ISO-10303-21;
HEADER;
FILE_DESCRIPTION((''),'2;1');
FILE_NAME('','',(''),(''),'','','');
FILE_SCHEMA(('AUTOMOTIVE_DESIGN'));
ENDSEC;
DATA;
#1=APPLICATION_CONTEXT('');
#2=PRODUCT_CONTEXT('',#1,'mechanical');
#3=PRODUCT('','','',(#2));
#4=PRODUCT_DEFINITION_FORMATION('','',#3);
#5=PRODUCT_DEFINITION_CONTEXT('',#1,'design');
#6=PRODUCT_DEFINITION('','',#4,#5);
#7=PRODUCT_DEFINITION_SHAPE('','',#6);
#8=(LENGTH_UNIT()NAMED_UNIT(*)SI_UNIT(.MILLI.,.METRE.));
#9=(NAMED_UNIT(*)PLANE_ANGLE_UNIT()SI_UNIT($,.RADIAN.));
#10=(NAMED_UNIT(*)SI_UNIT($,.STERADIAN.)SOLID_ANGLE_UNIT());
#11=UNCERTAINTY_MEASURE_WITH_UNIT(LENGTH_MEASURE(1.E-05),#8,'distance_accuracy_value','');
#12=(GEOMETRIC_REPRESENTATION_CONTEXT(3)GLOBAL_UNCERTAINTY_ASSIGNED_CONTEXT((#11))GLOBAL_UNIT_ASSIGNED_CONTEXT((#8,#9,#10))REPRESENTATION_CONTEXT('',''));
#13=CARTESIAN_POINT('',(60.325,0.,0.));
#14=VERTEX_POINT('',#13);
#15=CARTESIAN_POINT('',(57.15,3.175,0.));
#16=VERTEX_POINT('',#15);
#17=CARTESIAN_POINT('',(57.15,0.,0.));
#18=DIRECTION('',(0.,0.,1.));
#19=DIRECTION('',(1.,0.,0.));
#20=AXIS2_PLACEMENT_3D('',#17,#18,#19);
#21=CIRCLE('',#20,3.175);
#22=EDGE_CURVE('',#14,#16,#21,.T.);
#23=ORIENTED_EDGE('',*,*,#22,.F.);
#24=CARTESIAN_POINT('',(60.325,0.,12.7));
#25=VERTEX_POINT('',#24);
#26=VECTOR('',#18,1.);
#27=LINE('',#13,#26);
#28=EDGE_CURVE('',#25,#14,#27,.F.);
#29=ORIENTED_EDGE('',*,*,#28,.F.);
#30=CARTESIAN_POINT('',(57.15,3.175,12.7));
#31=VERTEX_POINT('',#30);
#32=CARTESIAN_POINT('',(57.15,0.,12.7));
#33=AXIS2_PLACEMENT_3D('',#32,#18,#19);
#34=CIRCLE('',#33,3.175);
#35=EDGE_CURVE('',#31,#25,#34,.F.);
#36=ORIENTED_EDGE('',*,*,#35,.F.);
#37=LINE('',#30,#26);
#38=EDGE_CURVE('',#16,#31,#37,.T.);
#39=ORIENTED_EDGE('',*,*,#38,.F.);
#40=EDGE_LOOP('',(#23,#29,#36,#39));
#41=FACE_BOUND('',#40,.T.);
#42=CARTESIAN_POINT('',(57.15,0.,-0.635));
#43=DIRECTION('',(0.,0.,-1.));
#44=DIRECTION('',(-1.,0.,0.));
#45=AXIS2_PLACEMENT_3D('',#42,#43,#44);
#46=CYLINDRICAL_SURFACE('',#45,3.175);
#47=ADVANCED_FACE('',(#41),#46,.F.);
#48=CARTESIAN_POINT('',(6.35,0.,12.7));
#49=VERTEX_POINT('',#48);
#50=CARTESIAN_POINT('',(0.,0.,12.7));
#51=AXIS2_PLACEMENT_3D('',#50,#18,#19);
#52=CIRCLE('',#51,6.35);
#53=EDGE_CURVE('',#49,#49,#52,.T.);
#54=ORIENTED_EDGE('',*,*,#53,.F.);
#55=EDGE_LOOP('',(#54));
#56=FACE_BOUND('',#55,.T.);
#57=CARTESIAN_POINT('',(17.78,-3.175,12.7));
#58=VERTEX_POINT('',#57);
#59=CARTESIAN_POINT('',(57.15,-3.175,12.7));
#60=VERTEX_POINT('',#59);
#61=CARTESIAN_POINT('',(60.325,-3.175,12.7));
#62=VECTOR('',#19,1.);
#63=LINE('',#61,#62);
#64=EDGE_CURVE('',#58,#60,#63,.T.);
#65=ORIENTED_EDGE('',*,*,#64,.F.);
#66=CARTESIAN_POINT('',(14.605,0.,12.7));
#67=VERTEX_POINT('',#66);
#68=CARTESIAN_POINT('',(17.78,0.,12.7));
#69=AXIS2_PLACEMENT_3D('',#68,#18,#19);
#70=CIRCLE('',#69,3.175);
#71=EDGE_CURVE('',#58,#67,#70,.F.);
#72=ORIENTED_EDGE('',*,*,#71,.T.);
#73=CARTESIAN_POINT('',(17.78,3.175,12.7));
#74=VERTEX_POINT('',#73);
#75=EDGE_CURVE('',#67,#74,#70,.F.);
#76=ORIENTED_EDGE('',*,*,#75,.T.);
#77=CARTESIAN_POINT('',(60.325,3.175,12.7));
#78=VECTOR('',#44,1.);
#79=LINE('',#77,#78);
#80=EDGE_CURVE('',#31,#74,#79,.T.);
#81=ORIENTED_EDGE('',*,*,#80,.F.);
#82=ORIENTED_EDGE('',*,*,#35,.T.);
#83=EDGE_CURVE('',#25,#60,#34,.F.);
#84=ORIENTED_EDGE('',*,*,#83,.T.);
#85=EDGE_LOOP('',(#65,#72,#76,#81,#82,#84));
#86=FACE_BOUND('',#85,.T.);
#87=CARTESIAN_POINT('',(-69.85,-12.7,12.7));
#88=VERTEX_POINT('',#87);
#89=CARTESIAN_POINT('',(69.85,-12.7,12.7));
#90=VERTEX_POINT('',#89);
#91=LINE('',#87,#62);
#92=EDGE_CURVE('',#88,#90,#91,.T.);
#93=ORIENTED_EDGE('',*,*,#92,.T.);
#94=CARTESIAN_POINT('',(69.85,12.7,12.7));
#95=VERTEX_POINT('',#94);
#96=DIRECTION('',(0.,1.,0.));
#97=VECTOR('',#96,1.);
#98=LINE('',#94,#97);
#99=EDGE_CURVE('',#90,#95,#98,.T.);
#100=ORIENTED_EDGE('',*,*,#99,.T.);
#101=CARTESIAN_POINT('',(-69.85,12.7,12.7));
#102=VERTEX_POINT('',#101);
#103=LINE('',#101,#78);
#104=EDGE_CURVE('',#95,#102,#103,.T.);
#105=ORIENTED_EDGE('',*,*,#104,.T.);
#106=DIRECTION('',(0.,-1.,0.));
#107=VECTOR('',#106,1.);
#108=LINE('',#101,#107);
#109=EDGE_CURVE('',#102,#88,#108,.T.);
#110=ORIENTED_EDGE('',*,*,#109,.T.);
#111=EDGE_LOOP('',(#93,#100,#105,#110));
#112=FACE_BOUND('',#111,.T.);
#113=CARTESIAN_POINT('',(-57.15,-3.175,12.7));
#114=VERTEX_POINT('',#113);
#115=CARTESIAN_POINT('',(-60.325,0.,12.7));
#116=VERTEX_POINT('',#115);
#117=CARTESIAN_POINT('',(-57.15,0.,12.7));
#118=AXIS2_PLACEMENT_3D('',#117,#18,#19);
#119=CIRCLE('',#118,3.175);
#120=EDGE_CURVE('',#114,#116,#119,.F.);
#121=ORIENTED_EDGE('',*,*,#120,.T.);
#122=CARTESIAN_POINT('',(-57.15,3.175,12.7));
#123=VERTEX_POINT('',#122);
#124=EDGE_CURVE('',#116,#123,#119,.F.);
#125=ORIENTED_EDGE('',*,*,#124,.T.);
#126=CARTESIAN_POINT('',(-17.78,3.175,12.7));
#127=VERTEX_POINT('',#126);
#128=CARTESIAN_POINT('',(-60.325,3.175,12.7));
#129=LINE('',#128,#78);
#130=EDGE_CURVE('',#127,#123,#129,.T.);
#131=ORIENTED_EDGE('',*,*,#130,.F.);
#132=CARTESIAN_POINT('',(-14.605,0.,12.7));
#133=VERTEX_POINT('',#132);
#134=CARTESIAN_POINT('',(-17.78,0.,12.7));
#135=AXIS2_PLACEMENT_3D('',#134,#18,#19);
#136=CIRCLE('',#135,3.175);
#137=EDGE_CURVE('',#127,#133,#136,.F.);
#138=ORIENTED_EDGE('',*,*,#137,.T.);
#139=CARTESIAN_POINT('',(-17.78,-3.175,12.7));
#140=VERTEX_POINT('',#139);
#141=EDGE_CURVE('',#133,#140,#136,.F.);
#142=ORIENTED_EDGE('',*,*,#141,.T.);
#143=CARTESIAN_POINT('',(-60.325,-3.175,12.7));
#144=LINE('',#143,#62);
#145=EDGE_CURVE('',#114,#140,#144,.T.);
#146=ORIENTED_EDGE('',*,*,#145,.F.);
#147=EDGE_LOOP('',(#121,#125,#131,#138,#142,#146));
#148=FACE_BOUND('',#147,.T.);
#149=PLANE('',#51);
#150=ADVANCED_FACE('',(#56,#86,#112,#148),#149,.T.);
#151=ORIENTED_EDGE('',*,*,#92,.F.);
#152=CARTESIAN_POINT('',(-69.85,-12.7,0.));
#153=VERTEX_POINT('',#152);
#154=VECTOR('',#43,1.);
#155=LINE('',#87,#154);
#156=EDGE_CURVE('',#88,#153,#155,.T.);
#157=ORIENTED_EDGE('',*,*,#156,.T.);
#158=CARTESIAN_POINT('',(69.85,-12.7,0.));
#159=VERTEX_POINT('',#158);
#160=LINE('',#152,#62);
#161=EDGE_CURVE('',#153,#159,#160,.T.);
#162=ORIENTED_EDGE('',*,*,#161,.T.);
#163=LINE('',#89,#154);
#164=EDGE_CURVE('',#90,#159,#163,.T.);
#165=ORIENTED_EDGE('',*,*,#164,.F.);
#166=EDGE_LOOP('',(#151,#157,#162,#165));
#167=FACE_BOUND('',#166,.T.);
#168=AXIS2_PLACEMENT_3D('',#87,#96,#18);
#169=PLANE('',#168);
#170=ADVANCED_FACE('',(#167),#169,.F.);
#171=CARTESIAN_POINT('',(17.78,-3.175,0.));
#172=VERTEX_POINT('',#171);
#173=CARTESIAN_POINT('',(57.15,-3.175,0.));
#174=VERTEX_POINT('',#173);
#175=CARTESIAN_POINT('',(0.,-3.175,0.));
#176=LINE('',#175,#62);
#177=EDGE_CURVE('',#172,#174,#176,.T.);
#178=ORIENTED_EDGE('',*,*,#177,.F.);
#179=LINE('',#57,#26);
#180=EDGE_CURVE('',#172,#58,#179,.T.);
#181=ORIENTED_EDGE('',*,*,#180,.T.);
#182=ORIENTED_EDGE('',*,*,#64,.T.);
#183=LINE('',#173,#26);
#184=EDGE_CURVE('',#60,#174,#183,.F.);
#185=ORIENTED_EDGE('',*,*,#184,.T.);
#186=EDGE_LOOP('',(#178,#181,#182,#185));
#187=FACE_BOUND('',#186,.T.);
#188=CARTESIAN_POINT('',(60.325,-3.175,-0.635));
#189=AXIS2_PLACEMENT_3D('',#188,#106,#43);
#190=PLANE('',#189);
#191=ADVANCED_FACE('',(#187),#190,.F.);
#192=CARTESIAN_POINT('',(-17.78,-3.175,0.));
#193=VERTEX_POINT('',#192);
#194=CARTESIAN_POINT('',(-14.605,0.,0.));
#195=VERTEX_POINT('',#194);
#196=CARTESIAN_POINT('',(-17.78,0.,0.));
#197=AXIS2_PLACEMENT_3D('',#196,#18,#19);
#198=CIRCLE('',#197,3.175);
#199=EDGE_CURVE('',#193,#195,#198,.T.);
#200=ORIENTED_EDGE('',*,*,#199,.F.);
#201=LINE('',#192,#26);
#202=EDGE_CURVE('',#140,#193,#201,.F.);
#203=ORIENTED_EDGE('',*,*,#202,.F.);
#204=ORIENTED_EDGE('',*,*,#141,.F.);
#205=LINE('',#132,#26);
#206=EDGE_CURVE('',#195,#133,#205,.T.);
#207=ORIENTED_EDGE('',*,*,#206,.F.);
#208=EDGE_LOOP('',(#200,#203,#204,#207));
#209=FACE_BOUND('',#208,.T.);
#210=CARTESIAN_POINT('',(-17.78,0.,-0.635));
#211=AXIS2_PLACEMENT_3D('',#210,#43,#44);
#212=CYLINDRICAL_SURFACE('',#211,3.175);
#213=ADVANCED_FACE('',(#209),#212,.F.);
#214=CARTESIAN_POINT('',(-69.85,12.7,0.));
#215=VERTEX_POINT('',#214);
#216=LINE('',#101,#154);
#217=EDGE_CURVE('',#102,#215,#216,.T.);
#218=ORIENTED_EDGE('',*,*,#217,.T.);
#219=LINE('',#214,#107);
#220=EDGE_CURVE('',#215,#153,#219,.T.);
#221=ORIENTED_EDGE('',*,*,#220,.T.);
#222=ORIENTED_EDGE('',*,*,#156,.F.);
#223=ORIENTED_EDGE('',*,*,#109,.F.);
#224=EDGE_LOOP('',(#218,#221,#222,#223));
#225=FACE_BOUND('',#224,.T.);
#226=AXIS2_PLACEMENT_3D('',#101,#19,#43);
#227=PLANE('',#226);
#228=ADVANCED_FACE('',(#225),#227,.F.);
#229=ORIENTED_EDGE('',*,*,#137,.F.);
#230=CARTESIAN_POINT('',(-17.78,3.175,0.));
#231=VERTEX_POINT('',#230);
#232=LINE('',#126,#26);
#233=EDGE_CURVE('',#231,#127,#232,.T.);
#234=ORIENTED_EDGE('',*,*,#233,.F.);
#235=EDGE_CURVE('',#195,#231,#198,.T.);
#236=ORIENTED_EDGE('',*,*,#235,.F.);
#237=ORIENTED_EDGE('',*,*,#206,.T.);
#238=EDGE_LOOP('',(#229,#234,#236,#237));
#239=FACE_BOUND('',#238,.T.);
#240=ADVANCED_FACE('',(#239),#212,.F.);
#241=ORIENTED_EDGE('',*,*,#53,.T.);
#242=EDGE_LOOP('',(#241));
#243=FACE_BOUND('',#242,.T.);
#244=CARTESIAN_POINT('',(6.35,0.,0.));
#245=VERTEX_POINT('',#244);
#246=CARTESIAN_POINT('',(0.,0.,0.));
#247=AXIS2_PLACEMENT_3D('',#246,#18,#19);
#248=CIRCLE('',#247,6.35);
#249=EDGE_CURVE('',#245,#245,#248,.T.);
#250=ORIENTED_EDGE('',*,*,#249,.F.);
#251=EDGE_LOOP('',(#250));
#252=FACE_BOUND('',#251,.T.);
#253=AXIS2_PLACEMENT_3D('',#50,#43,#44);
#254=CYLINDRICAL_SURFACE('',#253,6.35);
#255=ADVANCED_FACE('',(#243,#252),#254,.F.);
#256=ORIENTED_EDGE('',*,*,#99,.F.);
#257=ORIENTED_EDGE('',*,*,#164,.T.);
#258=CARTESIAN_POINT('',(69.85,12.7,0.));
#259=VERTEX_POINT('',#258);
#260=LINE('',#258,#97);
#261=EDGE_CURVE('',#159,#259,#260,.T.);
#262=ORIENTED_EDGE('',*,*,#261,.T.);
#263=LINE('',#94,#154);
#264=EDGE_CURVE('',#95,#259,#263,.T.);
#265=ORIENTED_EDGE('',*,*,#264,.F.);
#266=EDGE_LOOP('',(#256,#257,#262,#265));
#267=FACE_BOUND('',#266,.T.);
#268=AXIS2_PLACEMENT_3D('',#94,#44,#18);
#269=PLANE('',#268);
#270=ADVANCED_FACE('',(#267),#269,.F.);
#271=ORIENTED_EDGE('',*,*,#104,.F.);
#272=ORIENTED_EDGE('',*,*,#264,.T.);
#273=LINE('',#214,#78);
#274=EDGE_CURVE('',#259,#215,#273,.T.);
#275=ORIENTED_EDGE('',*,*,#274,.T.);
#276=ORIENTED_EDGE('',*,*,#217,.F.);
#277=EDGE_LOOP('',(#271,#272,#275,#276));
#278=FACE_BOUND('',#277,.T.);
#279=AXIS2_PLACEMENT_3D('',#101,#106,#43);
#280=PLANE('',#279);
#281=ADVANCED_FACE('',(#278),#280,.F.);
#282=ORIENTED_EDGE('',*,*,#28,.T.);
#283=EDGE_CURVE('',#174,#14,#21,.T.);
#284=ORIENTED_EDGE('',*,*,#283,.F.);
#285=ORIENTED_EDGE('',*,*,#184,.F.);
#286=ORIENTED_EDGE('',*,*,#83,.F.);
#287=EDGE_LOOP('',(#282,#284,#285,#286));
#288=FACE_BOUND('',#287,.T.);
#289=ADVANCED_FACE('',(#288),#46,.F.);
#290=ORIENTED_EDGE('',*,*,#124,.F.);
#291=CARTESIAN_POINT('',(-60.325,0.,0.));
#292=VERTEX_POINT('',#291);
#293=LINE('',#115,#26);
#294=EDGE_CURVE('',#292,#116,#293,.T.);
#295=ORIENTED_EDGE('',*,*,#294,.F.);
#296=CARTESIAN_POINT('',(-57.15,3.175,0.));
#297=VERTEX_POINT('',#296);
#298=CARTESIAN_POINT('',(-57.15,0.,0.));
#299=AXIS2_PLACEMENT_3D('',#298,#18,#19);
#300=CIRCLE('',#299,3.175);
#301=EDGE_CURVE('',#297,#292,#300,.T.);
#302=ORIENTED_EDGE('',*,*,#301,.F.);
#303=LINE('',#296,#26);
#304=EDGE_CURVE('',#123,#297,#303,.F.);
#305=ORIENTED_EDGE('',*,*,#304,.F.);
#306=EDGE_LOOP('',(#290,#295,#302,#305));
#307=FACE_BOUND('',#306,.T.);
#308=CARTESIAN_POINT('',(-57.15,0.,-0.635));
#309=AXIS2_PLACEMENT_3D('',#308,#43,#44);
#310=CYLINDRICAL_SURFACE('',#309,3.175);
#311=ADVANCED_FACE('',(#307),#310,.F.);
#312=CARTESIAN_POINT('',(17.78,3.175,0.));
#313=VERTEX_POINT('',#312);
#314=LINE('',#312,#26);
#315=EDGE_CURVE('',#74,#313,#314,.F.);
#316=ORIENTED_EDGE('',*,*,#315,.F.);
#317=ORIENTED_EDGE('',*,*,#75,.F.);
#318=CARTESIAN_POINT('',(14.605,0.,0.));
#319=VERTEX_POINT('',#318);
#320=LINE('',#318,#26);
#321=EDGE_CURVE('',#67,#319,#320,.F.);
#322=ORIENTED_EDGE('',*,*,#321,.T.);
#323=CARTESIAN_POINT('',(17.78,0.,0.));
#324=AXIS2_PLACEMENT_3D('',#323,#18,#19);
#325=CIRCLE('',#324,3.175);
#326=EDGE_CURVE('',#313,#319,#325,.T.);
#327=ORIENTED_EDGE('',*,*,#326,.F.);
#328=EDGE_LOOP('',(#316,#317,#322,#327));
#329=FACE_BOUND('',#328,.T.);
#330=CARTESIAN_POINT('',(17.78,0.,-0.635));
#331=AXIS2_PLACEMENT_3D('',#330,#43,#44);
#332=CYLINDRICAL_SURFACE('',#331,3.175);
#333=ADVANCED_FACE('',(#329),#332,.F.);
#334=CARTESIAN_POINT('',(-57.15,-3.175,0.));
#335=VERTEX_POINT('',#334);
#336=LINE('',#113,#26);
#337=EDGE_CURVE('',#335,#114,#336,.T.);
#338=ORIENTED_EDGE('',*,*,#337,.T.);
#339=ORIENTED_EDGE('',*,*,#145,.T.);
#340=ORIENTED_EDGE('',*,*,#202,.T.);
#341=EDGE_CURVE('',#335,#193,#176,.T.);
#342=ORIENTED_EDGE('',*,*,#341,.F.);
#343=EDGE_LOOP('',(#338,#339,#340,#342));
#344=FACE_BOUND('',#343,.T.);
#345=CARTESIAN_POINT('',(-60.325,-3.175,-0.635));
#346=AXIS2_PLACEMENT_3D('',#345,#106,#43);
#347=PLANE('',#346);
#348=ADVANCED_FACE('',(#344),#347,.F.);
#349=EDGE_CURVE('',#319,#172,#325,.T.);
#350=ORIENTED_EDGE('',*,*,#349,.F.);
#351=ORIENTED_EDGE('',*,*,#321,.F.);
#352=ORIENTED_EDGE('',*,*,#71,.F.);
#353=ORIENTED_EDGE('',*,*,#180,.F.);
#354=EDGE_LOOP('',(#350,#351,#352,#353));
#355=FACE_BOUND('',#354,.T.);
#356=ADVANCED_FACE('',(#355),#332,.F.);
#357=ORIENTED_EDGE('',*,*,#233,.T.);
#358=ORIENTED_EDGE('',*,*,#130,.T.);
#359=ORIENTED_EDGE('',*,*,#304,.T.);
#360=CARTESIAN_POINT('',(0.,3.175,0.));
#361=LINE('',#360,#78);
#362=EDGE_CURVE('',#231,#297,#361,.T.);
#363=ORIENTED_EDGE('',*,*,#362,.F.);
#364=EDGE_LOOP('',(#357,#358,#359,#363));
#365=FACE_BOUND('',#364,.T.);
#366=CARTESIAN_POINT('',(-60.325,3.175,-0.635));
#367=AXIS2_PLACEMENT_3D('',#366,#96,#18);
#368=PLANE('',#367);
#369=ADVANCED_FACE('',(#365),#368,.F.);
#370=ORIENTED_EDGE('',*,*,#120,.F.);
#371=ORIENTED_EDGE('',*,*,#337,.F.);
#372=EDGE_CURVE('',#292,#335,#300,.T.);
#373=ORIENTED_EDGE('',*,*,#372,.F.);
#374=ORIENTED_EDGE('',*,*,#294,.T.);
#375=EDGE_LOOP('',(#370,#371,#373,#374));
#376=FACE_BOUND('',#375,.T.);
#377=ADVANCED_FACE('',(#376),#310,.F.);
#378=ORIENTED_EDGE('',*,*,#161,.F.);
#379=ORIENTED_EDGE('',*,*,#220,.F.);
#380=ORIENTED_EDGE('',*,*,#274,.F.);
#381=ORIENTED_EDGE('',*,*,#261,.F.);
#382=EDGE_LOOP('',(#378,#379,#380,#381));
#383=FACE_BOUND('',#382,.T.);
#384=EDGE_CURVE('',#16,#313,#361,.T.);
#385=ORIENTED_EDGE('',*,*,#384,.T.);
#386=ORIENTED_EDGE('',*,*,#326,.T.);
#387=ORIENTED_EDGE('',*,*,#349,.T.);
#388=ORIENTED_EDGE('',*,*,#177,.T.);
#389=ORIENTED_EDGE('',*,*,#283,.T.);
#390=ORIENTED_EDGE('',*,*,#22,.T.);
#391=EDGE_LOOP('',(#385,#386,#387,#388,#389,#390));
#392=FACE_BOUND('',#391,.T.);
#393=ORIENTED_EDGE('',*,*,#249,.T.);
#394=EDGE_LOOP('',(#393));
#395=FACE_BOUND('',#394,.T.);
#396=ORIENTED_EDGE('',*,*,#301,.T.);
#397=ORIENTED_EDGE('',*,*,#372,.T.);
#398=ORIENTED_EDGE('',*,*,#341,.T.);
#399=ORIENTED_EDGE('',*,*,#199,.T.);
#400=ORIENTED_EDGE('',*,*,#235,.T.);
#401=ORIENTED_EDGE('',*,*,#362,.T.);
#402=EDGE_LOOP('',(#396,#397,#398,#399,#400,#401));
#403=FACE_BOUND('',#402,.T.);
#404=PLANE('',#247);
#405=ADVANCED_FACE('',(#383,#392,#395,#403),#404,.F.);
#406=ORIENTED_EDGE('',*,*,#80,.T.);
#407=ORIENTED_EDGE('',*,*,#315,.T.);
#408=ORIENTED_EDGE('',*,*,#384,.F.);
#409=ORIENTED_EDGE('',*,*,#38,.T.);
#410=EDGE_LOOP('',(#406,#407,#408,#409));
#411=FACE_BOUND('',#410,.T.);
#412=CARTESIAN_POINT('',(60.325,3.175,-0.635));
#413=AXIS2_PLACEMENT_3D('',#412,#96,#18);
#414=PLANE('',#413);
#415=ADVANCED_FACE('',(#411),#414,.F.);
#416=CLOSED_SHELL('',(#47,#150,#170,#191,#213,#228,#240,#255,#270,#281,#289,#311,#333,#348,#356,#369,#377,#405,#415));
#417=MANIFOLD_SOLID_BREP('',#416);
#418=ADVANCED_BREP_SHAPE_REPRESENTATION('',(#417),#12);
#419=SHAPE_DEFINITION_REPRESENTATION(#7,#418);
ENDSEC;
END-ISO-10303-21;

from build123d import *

# Parameters (mm, degrees)
SKETCH1_W           = 139.7
SKETCH1_H           = 25.4
SKETCH1_R           = 6.35
BOSS_EXTRUDE1_DEPTH = 12.7
SKETCH4_W           = 45.72
SKETCH4_H           = 6.35
CUT_EXTRUDE1_DEPTH  = 13.335
FILLET1_R           = 3.175


with BuildPart() as part:
    # Sketch1 → Boss-Extrude1 (new body)
    with BuildSketch(Plane.XY):
        Rectangle(SKETCH1_W, SKETCH1_H)
        Circle(SKETCH1_R, mode=Mode.SUBTRACT)
    extrude(amount=BOSS_EXTRUDE1_DEPTH)

    # Sketch4 → Cut-Extrude1 (cut)
    with BuildSketch(Plane.XY.offset(12.7)):
        with Locations((-37.465, 0)):
            Rectangle(SKETCH4_W, SKETCH4_H)
        with Locations((37.465, 0)):
            Rectangle(SKETCH4_W, SKETCH4_H)
    extrude(amount=-CUT_EXTRUDE1_DEPTH, mode=Mode.SUBTRACT)

    # Fillet1
    fillet1_edges = [part.edges().sort_by_distance(p)[0] for p in [
        (-14.605, 3.175, 6.35),
        (-14.605, -3.175, 6.35),
        (-60.325, -3.175, 6.35),
        (-60.325, 3.175, 6.35),
        (14.605, 3.175, 6.35),
        (14.605, -3.175, 6.35),
        (60.325, -3.175, 6.35),
        (60.325, 3.175, 6.35),
    ]]
    fillet(fillet1_edges, radius=FILLET1_R - 0.0001)  # a hair under: the kernel refuses the full size


solid = part.part
